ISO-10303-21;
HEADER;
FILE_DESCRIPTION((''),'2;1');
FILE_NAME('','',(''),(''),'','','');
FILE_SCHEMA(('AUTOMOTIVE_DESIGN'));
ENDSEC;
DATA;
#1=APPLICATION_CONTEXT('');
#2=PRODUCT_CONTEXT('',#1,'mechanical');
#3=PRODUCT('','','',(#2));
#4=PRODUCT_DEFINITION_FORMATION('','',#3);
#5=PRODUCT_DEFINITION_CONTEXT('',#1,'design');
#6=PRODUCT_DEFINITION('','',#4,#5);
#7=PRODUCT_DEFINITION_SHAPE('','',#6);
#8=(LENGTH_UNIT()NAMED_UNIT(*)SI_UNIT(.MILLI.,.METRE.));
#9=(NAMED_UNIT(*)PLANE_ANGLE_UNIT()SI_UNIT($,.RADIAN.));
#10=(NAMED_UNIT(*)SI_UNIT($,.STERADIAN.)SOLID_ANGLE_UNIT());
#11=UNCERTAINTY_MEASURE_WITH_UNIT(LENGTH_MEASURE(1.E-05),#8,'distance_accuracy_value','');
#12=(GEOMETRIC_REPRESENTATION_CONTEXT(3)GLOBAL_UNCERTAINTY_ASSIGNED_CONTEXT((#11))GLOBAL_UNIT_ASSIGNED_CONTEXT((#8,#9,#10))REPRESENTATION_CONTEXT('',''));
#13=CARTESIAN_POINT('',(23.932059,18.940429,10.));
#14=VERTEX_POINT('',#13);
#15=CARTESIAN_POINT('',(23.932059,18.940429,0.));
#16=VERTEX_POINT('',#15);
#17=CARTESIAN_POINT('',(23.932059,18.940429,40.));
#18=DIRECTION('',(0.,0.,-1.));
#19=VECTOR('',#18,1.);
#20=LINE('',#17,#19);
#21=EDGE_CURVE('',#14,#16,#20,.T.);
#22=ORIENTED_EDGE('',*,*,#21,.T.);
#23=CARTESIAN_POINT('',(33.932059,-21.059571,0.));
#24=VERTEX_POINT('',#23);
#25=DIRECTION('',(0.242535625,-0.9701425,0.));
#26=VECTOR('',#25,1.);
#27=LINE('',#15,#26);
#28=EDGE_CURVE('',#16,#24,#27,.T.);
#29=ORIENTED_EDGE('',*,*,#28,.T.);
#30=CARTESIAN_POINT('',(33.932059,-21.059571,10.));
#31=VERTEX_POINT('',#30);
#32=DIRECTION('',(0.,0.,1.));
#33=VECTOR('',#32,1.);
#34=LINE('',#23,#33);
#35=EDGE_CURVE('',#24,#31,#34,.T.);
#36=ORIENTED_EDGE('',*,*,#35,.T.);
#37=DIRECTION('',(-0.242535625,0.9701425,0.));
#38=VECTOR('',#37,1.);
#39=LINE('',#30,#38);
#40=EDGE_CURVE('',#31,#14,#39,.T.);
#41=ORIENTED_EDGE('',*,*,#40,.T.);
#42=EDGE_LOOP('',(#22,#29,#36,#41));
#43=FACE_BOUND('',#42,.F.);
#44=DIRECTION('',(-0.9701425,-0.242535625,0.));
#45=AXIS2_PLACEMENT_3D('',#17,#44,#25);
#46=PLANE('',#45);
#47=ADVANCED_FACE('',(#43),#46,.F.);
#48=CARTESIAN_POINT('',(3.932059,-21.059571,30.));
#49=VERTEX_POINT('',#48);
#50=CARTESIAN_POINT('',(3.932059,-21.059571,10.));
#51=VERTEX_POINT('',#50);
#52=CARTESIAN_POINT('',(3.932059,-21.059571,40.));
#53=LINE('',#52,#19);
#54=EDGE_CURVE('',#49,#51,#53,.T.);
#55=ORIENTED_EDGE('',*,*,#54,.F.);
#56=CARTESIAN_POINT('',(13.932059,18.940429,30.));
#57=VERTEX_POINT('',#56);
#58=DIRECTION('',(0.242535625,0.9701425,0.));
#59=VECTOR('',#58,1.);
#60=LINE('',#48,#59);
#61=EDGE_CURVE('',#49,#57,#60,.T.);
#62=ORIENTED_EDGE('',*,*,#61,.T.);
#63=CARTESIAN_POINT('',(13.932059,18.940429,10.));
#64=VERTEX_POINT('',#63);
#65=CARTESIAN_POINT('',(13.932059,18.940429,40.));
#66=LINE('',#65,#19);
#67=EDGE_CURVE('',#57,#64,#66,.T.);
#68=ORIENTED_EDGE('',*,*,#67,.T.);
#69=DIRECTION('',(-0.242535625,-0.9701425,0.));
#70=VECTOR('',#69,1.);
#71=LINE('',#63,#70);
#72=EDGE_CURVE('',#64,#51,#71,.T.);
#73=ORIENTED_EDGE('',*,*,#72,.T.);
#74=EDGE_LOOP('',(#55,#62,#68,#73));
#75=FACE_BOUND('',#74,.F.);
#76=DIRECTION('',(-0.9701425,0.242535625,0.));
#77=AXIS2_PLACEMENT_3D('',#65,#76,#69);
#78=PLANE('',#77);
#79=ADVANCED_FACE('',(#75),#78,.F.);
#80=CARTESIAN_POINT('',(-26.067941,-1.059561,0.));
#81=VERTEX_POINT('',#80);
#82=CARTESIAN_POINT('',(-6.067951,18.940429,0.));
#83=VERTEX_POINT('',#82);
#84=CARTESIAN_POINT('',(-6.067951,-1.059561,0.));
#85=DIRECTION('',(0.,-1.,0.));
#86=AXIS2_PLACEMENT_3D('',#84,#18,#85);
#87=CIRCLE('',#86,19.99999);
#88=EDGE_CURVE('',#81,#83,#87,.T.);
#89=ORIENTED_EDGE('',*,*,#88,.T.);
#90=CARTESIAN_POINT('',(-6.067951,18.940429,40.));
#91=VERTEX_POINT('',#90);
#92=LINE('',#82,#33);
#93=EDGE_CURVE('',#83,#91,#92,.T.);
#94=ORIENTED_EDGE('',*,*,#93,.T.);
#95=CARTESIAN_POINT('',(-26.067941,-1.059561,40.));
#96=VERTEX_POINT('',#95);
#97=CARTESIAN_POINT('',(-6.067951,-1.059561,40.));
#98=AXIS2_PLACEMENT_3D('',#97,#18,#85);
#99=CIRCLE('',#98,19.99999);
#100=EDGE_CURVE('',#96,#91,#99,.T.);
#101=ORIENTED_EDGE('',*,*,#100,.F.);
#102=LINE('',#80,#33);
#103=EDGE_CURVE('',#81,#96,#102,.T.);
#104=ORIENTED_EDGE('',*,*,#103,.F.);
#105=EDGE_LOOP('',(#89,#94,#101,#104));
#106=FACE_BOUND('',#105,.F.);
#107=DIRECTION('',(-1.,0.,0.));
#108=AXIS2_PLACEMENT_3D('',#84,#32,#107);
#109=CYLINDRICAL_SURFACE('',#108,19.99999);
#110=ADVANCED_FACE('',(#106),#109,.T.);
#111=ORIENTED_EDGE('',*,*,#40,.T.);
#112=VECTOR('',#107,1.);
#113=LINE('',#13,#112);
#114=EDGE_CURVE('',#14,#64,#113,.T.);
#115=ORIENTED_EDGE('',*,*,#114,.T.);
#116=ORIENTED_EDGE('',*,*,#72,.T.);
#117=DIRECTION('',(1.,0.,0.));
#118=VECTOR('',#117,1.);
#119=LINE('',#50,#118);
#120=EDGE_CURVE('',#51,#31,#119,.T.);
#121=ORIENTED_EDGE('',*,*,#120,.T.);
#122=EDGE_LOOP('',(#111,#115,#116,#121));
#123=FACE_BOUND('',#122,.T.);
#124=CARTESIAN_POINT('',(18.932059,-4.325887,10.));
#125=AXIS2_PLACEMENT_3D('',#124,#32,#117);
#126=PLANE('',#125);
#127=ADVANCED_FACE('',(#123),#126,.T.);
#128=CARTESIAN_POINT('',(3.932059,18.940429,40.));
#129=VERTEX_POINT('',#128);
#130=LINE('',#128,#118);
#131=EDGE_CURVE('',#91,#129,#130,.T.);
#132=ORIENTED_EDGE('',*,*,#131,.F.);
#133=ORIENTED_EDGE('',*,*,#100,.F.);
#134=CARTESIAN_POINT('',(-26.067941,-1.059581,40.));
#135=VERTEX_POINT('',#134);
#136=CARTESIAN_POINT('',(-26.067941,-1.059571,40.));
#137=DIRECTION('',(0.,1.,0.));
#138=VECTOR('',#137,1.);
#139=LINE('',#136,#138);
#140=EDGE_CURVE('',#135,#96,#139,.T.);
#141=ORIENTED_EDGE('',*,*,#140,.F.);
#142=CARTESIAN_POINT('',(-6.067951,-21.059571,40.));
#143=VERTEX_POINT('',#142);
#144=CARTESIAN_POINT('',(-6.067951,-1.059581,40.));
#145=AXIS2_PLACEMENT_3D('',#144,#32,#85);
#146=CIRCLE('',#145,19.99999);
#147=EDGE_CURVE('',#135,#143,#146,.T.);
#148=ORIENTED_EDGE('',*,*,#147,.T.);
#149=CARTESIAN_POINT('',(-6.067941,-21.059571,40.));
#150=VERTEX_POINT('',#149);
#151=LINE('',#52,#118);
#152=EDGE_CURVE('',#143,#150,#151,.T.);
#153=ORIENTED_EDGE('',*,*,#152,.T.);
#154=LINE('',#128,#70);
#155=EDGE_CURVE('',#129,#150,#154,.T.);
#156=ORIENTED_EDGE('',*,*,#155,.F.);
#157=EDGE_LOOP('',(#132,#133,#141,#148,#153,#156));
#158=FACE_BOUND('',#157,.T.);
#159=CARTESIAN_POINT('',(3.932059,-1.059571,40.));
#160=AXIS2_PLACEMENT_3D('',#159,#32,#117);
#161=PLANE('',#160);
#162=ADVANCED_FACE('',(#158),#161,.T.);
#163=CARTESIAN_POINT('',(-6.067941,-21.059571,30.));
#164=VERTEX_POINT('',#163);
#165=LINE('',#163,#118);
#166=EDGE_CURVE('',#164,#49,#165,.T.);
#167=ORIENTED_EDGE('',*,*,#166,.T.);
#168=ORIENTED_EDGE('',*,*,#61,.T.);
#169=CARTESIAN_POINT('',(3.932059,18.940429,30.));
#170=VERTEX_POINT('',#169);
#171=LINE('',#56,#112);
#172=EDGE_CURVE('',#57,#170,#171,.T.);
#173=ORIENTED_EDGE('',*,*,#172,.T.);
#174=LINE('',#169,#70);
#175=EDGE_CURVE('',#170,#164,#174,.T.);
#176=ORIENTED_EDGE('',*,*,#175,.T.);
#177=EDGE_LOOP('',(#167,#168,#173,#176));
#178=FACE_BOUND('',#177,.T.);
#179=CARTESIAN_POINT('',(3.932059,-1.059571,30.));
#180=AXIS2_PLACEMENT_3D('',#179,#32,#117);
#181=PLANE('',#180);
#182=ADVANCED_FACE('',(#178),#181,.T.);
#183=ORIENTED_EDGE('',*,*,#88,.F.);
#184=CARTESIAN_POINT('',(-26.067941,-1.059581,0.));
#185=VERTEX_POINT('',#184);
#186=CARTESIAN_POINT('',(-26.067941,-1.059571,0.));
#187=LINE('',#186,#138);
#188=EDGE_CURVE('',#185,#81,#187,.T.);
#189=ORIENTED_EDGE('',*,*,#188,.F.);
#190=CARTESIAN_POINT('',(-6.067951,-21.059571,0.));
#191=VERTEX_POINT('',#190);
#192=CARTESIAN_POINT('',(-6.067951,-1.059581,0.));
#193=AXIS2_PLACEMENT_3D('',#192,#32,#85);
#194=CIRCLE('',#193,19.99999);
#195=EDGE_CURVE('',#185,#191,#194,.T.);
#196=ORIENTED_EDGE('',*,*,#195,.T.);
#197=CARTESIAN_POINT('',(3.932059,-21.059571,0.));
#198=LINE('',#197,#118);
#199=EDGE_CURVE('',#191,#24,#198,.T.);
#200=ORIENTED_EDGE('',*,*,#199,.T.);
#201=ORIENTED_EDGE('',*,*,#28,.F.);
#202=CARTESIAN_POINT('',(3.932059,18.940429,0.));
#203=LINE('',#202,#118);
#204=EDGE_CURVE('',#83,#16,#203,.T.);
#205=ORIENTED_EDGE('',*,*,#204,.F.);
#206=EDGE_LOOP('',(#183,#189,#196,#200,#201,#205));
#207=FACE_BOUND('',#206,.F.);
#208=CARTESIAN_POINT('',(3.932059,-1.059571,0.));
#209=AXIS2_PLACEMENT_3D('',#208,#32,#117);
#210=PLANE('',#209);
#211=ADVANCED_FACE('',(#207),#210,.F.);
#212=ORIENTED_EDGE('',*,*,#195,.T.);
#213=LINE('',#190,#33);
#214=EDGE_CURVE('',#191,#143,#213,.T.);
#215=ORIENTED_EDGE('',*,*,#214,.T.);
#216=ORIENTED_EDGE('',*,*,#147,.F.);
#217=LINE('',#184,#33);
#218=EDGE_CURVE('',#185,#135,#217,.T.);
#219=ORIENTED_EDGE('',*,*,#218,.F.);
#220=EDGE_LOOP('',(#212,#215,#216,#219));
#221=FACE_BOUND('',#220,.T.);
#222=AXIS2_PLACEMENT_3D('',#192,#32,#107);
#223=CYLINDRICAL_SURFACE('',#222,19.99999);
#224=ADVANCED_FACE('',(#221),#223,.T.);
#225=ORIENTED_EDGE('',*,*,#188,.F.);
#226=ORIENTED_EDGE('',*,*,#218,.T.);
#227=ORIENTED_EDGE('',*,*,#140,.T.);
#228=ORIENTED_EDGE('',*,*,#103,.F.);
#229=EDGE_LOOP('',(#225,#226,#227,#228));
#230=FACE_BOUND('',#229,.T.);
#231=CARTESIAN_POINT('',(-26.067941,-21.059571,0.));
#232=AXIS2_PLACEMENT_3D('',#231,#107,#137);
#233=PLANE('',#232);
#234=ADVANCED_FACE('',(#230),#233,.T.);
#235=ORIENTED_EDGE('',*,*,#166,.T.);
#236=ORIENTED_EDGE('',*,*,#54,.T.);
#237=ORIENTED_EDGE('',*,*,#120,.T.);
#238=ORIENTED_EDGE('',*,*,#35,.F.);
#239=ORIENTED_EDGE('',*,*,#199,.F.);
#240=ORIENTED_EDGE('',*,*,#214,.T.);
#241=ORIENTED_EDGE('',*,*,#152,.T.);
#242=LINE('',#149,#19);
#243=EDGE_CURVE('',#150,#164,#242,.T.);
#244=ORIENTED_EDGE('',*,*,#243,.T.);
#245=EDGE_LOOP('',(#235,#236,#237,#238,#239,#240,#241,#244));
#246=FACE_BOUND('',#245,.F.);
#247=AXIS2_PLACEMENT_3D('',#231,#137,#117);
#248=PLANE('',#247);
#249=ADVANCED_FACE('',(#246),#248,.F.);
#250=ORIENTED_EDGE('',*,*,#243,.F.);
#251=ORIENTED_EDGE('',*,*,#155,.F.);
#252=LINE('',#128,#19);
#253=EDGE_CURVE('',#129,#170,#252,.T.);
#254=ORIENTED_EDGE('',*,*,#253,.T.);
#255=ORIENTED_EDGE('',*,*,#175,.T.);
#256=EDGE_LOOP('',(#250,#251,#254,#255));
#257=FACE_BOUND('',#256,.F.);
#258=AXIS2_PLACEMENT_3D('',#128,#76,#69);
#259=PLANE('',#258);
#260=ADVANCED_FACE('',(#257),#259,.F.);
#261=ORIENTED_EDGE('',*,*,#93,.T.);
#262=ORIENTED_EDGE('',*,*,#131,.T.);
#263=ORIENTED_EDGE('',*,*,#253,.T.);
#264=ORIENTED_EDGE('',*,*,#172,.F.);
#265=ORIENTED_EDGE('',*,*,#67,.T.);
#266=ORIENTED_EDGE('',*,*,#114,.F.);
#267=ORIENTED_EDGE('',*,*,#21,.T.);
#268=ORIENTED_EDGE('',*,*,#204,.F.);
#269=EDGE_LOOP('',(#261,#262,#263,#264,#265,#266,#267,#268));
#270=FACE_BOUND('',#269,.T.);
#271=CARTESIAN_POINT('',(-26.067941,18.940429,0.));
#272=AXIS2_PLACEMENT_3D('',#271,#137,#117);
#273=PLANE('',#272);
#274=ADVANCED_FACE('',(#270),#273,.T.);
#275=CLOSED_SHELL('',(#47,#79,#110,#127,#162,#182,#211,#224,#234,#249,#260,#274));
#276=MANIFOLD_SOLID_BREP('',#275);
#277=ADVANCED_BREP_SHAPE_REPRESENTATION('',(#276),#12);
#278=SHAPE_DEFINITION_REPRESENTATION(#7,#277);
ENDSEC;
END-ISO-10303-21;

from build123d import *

# Parameters (mm, degrees)
F0_W     = 60
F0_H     = 40
F1_DEPTH = 40
F2_R     = 19.99999
F4_DEPTH = 40
F6_DEPTH = 30
F8_DEPTH = 10


# Not quite as in the source:
# - a fillet or chamfer is up to 0.001 mm smaller than in the source, because OpenCascade refuses the exact size


with BuildPart() as f1:
    # F0 (on Top) → F1 (new body)
    with BuildSketch(Plane.XY):
        with Locations((3.9320588112, -1.0595708795)):
            Rectangle(F0_W, F0_H)
    extrude(amount=F1_DEPTH)

    # F2 (radius 20 in the source; OpenCascade refuses exactly that, so slightly less here)
    f2_edges = [f1.edges().sort_by_distance(p)[0] for p in [
        (-26.067941, 18.940429, 20),
        (-26.067941, -21.059571, 20),
    ]]
    fillet(f2_edges, radius=F2_R)

    # F3 (on face) → F4 (cut)
    with BuildSketch(Plane.XY.offset(40)):
        Polygon((33.9320588112, -21.0595708795), (33.9320588112, 18.9404291205), (23.9320588112, 18.9404291205), align=None)
    extrude(amount=-F4_DEPTH, mode=Mode.SUBTRACT)

    # F5 (on face) → F6 (cut)
    with BuildSketch(Plane.XY.offset(40)):
        Polygon((33.9320588112, -21.0595708795), (23.9320588112, 18.9404291205), (13.9320588112, 18.9404291205), (3.9320588112, -21.0595708795), align=None)
    extrude(amount=-F6_DEPTH, mode=Mode.SUBTRACT)

    # F7 (on face) → F8 (cut)
    with BuildSketch(Plane.XY.offset(40)):
        Polygon((3.9320588112, -21.0595708795), (13.9320588112, 18.9404291205), (3.9320588112, 18.9404291205), (-6.0679411888, -21.0595708795), align=None)
    extrude(amount=-F8_DEPTH, mode=Mode.SUBTRACT)


solid = f1.part
